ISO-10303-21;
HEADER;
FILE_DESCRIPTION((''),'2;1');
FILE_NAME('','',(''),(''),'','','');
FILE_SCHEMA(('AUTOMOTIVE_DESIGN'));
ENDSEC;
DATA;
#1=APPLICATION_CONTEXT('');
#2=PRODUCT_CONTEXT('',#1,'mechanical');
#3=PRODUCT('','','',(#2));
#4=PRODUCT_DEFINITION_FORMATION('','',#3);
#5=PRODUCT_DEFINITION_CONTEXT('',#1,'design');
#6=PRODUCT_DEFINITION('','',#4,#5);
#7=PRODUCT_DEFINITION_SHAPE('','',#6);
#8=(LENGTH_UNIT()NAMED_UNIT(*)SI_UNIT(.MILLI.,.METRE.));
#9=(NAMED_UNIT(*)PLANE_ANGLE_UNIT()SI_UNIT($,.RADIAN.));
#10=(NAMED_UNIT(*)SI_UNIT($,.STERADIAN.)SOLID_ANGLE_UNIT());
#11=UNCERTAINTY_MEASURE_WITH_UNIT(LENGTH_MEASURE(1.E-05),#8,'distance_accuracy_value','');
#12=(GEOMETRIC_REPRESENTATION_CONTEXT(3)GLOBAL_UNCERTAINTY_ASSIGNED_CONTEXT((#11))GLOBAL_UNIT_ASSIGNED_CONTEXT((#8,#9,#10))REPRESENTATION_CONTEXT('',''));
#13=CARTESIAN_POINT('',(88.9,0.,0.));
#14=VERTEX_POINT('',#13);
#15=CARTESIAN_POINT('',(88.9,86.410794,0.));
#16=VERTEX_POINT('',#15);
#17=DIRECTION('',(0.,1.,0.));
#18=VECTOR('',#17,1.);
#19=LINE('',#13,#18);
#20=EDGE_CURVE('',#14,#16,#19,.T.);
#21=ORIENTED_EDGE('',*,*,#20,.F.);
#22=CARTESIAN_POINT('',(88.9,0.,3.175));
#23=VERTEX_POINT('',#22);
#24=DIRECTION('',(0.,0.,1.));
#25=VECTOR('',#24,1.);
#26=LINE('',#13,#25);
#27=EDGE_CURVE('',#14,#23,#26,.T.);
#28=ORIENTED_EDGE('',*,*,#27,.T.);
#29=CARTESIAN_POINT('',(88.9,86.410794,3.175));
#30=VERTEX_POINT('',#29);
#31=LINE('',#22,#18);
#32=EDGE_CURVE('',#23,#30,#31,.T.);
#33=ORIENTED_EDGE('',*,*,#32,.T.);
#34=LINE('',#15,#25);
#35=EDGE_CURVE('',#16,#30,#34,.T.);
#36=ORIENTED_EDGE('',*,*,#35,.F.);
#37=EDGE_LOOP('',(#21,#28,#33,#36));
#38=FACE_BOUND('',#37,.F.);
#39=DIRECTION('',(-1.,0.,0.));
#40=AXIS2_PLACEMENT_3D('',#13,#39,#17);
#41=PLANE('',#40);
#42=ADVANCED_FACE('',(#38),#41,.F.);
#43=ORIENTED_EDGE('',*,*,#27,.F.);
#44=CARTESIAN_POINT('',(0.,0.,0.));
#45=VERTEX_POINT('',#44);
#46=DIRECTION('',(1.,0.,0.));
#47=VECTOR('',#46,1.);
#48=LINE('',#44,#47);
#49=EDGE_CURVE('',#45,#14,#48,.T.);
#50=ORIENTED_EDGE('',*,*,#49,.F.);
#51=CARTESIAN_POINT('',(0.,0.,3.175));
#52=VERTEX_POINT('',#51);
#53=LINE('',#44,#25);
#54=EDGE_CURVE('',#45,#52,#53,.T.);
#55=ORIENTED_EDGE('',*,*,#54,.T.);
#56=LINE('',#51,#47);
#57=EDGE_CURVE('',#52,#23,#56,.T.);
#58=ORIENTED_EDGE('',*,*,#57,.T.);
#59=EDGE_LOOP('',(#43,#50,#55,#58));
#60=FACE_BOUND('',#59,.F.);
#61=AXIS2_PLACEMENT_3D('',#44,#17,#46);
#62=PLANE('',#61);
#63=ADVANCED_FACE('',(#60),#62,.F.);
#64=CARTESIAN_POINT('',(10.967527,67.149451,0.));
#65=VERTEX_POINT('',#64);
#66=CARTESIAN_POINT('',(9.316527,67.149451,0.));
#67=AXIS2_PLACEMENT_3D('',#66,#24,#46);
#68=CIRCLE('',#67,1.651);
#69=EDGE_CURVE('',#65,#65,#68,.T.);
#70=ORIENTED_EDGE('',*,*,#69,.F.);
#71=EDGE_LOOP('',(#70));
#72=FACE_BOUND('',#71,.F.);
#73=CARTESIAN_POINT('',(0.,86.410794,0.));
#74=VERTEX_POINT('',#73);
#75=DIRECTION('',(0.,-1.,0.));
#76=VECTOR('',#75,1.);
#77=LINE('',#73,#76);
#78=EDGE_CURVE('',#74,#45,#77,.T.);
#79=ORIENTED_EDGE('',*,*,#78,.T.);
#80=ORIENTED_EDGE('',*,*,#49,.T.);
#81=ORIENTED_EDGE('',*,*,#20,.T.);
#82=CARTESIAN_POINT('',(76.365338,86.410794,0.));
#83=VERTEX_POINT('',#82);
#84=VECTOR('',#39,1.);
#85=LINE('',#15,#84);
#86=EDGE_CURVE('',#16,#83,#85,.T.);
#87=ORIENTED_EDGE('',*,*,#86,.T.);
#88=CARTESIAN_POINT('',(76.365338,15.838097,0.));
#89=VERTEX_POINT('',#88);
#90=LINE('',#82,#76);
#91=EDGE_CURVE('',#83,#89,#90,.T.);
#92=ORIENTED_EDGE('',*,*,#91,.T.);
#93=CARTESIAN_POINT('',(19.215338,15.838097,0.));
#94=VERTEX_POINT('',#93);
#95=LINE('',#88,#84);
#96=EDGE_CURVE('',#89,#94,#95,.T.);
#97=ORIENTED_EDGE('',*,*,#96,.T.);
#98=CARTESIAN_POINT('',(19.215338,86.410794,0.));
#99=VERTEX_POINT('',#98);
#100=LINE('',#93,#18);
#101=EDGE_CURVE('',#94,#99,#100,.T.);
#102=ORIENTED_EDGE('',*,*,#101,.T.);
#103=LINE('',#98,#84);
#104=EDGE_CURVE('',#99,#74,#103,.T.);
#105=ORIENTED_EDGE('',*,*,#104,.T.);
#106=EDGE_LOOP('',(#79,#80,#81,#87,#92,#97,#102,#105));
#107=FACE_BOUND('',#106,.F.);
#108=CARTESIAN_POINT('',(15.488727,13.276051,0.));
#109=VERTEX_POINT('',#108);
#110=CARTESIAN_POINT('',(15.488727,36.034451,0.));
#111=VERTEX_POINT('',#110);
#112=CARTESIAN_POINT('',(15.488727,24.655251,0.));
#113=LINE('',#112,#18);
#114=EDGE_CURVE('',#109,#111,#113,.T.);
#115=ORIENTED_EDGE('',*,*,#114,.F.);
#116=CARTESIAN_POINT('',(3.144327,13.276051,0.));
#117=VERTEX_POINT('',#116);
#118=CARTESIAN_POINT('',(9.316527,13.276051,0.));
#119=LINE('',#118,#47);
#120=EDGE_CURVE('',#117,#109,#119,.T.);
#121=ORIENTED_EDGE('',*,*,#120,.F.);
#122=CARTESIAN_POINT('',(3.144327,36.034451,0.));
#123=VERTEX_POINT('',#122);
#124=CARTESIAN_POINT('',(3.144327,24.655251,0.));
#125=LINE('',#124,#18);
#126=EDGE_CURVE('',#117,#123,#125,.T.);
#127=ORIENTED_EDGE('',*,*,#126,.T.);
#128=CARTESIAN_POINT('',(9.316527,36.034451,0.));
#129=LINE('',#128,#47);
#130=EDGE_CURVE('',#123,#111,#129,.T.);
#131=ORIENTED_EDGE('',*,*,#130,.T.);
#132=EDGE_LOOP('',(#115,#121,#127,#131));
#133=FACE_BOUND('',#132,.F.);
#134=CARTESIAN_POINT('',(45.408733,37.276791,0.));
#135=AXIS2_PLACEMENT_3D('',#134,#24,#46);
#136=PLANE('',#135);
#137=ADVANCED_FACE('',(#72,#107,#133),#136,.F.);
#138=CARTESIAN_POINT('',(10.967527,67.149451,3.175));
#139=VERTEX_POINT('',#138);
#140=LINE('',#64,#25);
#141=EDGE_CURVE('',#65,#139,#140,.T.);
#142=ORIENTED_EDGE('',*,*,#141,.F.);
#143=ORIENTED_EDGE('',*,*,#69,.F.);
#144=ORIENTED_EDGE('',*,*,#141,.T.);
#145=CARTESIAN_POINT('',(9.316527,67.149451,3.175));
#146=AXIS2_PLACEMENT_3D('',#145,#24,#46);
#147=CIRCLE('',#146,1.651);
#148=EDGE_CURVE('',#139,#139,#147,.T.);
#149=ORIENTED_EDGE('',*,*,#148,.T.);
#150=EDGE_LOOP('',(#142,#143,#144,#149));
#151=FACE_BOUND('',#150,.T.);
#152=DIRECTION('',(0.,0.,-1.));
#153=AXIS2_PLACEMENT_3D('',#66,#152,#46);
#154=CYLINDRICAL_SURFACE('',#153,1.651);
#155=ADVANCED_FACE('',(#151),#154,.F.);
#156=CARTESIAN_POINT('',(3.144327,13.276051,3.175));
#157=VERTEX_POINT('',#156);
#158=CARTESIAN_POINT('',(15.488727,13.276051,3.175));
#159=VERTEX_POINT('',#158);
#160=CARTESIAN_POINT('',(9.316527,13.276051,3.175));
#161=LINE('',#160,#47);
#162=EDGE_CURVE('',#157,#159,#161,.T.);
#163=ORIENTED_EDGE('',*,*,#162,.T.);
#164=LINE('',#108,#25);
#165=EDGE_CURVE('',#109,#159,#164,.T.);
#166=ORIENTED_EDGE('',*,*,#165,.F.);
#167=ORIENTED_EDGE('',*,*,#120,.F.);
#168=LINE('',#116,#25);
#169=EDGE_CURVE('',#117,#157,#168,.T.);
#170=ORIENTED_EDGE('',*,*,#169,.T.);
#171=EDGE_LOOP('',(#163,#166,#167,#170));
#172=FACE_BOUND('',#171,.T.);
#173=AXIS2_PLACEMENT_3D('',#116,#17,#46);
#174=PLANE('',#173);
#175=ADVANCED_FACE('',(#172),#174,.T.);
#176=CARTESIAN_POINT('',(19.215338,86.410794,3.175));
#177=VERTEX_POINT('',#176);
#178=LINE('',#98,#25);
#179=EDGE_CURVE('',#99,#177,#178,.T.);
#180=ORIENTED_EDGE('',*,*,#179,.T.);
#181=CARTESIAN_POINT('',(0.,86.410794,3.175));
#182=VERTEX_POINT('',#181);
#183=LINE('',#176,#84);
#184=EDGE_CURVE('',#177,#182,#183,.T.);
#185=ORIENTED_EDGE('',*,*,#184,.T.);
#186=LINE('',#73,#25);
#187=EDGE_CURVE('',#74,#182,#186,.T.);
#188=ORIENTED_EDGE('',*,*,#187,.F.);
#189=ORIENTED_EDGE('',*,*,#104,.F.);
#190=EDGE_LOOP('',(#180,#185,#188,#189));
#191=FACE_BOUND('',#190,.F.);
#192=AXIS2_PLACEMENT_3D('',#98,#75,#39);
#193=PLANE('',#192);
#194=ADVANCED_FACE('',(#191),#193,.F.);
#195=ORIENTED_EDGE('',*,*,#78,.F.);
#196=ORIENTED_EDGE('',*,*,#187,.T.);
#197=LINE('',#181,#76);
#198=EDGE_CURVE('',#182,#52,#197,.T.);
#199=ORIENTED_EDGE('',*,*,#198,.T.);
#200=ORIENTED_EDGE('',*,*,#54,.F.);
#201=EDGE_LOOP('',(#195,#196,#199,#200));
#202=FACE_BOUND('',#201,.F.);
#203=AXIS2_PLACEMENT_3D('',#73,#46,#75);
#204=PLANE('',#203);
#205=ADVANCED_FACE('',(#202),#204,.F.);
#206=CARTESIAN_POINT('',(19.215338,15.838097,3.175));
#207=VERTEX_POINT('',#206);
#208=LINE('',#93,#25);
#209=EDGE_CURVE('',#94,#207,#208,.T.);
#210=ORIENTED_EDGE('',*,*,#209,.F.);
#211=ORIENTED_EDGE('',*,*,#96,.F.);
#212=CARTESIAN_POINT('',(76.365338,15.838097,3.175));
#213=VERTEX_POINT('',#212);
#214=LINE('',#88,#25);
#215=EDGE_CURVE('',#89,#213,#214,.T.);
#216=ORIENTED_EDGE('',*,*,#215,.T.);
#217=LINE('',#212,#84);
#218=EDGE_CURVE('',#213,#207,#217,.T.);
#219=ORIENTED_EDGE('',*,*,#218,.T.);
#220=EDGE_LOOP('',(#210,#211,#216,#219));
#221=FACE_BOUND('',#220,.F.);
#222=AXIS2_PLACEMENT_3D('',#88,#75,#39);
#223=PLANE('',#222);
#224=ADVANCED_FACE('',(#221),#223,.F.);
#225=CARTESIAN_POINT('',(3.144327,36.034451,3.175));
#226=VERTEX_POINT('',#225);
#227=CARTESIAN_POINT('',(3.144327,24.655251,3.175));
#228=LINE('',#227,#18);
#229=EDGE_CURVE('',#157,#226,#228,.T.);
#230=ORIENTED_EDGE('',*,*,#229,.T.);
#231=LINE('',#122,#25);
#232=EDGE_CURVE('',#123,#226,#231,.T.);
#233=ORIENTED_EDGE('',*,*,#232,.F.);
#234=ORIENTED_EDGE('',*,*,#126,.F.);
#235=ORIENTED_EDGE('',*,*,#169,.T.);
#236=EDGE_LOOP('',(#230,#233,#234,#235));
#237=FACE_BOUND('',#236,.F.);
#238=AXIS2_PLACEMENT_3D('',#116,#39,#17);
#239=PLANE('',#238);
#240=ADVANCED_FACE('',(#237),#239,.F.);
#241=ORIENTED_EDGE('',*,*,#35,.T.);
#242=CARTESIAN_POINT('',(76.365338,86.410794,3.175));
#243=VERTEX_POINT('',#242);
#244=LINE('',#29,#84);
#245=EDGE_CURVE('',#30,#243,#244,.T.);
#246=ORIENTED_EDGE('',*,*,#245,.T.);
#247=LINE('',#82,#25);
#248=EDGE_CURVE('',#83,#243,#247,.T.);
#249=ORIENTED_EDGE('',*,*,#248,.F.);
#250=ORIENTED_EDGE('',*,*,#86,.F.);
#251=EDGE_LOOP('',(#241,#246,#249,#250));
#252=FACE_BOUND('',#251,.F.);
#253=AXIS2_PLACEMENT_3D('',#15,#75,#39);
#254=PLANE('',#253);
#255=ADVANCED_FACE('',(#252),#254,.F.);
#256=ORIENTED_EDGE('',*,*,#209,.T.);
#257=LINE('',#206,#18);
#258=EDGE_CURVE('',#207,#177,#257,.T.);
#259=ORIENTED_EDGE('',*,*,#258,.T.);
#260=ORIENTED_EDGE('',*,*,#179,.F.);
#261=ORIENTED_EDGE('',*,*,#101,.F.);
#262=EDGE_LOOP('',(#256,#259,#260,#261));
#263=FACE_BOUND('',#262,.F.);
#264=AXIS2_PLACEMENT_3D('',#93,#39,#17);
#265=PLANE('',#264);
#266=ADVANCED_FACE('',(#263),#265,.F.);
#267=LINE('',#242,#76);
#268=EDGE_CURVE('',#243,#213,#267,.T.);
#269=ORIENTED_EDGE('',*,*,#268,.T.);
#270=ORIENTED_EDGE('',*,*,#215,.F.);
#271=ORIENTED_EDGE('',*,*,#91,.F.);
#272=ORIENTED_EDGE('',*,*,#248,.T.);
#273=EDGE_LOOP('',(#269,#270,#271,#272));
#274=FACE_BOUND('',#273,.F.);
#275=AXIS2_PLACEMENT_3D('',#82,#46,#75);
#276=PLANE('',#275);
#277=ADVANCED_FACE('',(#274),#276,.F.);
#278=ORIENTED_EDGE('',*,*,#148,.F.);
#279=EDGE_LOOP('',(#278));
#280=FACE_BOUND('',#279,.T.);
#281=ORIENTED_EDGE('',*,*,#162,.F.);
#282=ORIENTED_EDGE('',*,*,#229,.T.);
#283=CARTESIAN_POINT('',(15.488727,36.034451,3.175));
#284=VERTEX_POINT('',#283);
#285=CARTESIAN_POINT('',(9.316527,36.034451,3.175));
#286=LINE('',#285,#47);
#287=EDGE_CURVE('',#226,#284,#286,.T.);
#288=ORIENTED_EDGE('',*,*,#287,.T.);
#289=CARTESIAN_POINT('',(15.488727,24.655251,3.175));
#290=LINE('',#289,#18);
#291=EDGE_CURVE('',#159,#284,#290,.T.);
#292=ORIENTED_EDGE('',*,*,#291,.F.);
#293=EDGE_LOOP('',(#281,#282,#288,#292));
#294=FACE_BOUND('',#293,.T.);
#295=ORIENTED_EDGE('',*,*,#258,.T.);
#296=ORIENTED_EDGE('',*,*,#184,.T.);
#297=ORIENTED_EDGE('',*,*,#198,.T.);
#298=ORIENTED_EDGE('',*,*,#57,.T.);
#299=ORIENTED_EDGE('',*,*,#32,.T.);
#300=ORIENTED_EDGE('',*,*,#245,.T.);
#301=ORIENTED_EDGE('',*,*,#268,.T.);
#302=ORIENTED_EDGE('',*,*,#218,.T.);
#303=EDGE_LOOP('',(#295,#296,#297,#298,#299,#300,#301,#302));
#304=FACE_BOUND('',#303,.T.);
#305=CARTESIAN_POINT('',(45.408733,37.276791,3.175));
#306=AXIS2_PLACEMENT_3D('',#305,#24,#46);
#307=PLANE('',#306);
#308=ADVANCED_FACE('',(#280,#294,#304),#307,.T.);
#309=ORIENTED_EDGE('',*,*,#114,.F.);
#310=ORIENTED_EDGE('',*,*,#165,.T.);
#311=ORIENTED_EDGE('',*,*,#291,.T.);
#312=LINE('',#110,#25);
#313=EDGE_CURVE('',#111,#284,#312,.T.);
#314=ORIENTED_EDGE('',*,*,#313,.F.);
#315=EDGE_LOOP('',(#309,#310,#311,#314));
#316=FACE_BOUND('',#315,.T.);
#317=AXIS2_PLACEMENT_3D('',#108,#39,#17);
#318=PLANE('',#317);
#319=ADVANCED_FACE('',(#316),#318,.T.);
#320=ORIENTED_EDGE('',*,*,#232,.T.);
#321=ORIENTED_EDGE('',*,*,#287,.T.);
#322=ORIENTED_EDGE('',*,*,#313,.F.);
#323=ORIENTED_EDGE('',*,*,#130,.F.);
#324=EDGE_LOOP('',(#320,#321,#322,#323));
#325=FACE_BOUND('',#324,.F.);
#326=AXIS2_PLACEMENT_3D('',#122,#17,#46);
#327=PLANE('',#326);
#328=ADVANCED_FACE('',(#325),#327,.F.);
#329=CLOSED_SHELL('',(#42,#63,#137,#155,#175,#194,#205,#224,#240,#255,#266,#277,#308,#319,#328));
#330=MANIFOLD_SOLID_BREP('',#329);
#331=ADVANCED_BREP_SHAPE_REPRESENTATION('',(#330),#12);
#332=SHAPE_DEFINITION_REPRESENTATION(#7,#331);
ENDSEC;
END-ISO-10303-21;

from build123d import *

# Parameters (mm, degrees)
F0_W     = 12.3444
F0_H     = 22.7584
F0_R     = 1.651
F1_DEPTH = 3.175


# Not quite as in the source:
# - a length typed as a fraction of an inch, garbled in the dataset ("3 / 203.2 mm" for 3/8 in), is restored


with BuildPart() as f1:
    # F0 (on Top) → F1 (new body)
    with BuildSketch(Plane.XY):
        Polygon((0, 86.4107935882), (0, 0), (19.2153378795, 0), (88.9, 0), (88.9, 15.8380966835), (88.9, 86.4107935882), (76.3653378795, 86.4107935882), (76.3653378795, 15.8380966835), (19.2153378795, 15.8380966835), (19.2153378795, 86.4107935882), align=None)
        with Locations((9.3165273066, 24.6552514774)):
            Rectangle(F0_W, F0_H, mode=Mode.SUBTRACT)
        with Locations((9.3165273066, 67.1494514774)):
            Circle(F0_R, mode=Mode.SUBTRACT)
    extrude(amount=F1_DEPTH)


solid = f1.part
